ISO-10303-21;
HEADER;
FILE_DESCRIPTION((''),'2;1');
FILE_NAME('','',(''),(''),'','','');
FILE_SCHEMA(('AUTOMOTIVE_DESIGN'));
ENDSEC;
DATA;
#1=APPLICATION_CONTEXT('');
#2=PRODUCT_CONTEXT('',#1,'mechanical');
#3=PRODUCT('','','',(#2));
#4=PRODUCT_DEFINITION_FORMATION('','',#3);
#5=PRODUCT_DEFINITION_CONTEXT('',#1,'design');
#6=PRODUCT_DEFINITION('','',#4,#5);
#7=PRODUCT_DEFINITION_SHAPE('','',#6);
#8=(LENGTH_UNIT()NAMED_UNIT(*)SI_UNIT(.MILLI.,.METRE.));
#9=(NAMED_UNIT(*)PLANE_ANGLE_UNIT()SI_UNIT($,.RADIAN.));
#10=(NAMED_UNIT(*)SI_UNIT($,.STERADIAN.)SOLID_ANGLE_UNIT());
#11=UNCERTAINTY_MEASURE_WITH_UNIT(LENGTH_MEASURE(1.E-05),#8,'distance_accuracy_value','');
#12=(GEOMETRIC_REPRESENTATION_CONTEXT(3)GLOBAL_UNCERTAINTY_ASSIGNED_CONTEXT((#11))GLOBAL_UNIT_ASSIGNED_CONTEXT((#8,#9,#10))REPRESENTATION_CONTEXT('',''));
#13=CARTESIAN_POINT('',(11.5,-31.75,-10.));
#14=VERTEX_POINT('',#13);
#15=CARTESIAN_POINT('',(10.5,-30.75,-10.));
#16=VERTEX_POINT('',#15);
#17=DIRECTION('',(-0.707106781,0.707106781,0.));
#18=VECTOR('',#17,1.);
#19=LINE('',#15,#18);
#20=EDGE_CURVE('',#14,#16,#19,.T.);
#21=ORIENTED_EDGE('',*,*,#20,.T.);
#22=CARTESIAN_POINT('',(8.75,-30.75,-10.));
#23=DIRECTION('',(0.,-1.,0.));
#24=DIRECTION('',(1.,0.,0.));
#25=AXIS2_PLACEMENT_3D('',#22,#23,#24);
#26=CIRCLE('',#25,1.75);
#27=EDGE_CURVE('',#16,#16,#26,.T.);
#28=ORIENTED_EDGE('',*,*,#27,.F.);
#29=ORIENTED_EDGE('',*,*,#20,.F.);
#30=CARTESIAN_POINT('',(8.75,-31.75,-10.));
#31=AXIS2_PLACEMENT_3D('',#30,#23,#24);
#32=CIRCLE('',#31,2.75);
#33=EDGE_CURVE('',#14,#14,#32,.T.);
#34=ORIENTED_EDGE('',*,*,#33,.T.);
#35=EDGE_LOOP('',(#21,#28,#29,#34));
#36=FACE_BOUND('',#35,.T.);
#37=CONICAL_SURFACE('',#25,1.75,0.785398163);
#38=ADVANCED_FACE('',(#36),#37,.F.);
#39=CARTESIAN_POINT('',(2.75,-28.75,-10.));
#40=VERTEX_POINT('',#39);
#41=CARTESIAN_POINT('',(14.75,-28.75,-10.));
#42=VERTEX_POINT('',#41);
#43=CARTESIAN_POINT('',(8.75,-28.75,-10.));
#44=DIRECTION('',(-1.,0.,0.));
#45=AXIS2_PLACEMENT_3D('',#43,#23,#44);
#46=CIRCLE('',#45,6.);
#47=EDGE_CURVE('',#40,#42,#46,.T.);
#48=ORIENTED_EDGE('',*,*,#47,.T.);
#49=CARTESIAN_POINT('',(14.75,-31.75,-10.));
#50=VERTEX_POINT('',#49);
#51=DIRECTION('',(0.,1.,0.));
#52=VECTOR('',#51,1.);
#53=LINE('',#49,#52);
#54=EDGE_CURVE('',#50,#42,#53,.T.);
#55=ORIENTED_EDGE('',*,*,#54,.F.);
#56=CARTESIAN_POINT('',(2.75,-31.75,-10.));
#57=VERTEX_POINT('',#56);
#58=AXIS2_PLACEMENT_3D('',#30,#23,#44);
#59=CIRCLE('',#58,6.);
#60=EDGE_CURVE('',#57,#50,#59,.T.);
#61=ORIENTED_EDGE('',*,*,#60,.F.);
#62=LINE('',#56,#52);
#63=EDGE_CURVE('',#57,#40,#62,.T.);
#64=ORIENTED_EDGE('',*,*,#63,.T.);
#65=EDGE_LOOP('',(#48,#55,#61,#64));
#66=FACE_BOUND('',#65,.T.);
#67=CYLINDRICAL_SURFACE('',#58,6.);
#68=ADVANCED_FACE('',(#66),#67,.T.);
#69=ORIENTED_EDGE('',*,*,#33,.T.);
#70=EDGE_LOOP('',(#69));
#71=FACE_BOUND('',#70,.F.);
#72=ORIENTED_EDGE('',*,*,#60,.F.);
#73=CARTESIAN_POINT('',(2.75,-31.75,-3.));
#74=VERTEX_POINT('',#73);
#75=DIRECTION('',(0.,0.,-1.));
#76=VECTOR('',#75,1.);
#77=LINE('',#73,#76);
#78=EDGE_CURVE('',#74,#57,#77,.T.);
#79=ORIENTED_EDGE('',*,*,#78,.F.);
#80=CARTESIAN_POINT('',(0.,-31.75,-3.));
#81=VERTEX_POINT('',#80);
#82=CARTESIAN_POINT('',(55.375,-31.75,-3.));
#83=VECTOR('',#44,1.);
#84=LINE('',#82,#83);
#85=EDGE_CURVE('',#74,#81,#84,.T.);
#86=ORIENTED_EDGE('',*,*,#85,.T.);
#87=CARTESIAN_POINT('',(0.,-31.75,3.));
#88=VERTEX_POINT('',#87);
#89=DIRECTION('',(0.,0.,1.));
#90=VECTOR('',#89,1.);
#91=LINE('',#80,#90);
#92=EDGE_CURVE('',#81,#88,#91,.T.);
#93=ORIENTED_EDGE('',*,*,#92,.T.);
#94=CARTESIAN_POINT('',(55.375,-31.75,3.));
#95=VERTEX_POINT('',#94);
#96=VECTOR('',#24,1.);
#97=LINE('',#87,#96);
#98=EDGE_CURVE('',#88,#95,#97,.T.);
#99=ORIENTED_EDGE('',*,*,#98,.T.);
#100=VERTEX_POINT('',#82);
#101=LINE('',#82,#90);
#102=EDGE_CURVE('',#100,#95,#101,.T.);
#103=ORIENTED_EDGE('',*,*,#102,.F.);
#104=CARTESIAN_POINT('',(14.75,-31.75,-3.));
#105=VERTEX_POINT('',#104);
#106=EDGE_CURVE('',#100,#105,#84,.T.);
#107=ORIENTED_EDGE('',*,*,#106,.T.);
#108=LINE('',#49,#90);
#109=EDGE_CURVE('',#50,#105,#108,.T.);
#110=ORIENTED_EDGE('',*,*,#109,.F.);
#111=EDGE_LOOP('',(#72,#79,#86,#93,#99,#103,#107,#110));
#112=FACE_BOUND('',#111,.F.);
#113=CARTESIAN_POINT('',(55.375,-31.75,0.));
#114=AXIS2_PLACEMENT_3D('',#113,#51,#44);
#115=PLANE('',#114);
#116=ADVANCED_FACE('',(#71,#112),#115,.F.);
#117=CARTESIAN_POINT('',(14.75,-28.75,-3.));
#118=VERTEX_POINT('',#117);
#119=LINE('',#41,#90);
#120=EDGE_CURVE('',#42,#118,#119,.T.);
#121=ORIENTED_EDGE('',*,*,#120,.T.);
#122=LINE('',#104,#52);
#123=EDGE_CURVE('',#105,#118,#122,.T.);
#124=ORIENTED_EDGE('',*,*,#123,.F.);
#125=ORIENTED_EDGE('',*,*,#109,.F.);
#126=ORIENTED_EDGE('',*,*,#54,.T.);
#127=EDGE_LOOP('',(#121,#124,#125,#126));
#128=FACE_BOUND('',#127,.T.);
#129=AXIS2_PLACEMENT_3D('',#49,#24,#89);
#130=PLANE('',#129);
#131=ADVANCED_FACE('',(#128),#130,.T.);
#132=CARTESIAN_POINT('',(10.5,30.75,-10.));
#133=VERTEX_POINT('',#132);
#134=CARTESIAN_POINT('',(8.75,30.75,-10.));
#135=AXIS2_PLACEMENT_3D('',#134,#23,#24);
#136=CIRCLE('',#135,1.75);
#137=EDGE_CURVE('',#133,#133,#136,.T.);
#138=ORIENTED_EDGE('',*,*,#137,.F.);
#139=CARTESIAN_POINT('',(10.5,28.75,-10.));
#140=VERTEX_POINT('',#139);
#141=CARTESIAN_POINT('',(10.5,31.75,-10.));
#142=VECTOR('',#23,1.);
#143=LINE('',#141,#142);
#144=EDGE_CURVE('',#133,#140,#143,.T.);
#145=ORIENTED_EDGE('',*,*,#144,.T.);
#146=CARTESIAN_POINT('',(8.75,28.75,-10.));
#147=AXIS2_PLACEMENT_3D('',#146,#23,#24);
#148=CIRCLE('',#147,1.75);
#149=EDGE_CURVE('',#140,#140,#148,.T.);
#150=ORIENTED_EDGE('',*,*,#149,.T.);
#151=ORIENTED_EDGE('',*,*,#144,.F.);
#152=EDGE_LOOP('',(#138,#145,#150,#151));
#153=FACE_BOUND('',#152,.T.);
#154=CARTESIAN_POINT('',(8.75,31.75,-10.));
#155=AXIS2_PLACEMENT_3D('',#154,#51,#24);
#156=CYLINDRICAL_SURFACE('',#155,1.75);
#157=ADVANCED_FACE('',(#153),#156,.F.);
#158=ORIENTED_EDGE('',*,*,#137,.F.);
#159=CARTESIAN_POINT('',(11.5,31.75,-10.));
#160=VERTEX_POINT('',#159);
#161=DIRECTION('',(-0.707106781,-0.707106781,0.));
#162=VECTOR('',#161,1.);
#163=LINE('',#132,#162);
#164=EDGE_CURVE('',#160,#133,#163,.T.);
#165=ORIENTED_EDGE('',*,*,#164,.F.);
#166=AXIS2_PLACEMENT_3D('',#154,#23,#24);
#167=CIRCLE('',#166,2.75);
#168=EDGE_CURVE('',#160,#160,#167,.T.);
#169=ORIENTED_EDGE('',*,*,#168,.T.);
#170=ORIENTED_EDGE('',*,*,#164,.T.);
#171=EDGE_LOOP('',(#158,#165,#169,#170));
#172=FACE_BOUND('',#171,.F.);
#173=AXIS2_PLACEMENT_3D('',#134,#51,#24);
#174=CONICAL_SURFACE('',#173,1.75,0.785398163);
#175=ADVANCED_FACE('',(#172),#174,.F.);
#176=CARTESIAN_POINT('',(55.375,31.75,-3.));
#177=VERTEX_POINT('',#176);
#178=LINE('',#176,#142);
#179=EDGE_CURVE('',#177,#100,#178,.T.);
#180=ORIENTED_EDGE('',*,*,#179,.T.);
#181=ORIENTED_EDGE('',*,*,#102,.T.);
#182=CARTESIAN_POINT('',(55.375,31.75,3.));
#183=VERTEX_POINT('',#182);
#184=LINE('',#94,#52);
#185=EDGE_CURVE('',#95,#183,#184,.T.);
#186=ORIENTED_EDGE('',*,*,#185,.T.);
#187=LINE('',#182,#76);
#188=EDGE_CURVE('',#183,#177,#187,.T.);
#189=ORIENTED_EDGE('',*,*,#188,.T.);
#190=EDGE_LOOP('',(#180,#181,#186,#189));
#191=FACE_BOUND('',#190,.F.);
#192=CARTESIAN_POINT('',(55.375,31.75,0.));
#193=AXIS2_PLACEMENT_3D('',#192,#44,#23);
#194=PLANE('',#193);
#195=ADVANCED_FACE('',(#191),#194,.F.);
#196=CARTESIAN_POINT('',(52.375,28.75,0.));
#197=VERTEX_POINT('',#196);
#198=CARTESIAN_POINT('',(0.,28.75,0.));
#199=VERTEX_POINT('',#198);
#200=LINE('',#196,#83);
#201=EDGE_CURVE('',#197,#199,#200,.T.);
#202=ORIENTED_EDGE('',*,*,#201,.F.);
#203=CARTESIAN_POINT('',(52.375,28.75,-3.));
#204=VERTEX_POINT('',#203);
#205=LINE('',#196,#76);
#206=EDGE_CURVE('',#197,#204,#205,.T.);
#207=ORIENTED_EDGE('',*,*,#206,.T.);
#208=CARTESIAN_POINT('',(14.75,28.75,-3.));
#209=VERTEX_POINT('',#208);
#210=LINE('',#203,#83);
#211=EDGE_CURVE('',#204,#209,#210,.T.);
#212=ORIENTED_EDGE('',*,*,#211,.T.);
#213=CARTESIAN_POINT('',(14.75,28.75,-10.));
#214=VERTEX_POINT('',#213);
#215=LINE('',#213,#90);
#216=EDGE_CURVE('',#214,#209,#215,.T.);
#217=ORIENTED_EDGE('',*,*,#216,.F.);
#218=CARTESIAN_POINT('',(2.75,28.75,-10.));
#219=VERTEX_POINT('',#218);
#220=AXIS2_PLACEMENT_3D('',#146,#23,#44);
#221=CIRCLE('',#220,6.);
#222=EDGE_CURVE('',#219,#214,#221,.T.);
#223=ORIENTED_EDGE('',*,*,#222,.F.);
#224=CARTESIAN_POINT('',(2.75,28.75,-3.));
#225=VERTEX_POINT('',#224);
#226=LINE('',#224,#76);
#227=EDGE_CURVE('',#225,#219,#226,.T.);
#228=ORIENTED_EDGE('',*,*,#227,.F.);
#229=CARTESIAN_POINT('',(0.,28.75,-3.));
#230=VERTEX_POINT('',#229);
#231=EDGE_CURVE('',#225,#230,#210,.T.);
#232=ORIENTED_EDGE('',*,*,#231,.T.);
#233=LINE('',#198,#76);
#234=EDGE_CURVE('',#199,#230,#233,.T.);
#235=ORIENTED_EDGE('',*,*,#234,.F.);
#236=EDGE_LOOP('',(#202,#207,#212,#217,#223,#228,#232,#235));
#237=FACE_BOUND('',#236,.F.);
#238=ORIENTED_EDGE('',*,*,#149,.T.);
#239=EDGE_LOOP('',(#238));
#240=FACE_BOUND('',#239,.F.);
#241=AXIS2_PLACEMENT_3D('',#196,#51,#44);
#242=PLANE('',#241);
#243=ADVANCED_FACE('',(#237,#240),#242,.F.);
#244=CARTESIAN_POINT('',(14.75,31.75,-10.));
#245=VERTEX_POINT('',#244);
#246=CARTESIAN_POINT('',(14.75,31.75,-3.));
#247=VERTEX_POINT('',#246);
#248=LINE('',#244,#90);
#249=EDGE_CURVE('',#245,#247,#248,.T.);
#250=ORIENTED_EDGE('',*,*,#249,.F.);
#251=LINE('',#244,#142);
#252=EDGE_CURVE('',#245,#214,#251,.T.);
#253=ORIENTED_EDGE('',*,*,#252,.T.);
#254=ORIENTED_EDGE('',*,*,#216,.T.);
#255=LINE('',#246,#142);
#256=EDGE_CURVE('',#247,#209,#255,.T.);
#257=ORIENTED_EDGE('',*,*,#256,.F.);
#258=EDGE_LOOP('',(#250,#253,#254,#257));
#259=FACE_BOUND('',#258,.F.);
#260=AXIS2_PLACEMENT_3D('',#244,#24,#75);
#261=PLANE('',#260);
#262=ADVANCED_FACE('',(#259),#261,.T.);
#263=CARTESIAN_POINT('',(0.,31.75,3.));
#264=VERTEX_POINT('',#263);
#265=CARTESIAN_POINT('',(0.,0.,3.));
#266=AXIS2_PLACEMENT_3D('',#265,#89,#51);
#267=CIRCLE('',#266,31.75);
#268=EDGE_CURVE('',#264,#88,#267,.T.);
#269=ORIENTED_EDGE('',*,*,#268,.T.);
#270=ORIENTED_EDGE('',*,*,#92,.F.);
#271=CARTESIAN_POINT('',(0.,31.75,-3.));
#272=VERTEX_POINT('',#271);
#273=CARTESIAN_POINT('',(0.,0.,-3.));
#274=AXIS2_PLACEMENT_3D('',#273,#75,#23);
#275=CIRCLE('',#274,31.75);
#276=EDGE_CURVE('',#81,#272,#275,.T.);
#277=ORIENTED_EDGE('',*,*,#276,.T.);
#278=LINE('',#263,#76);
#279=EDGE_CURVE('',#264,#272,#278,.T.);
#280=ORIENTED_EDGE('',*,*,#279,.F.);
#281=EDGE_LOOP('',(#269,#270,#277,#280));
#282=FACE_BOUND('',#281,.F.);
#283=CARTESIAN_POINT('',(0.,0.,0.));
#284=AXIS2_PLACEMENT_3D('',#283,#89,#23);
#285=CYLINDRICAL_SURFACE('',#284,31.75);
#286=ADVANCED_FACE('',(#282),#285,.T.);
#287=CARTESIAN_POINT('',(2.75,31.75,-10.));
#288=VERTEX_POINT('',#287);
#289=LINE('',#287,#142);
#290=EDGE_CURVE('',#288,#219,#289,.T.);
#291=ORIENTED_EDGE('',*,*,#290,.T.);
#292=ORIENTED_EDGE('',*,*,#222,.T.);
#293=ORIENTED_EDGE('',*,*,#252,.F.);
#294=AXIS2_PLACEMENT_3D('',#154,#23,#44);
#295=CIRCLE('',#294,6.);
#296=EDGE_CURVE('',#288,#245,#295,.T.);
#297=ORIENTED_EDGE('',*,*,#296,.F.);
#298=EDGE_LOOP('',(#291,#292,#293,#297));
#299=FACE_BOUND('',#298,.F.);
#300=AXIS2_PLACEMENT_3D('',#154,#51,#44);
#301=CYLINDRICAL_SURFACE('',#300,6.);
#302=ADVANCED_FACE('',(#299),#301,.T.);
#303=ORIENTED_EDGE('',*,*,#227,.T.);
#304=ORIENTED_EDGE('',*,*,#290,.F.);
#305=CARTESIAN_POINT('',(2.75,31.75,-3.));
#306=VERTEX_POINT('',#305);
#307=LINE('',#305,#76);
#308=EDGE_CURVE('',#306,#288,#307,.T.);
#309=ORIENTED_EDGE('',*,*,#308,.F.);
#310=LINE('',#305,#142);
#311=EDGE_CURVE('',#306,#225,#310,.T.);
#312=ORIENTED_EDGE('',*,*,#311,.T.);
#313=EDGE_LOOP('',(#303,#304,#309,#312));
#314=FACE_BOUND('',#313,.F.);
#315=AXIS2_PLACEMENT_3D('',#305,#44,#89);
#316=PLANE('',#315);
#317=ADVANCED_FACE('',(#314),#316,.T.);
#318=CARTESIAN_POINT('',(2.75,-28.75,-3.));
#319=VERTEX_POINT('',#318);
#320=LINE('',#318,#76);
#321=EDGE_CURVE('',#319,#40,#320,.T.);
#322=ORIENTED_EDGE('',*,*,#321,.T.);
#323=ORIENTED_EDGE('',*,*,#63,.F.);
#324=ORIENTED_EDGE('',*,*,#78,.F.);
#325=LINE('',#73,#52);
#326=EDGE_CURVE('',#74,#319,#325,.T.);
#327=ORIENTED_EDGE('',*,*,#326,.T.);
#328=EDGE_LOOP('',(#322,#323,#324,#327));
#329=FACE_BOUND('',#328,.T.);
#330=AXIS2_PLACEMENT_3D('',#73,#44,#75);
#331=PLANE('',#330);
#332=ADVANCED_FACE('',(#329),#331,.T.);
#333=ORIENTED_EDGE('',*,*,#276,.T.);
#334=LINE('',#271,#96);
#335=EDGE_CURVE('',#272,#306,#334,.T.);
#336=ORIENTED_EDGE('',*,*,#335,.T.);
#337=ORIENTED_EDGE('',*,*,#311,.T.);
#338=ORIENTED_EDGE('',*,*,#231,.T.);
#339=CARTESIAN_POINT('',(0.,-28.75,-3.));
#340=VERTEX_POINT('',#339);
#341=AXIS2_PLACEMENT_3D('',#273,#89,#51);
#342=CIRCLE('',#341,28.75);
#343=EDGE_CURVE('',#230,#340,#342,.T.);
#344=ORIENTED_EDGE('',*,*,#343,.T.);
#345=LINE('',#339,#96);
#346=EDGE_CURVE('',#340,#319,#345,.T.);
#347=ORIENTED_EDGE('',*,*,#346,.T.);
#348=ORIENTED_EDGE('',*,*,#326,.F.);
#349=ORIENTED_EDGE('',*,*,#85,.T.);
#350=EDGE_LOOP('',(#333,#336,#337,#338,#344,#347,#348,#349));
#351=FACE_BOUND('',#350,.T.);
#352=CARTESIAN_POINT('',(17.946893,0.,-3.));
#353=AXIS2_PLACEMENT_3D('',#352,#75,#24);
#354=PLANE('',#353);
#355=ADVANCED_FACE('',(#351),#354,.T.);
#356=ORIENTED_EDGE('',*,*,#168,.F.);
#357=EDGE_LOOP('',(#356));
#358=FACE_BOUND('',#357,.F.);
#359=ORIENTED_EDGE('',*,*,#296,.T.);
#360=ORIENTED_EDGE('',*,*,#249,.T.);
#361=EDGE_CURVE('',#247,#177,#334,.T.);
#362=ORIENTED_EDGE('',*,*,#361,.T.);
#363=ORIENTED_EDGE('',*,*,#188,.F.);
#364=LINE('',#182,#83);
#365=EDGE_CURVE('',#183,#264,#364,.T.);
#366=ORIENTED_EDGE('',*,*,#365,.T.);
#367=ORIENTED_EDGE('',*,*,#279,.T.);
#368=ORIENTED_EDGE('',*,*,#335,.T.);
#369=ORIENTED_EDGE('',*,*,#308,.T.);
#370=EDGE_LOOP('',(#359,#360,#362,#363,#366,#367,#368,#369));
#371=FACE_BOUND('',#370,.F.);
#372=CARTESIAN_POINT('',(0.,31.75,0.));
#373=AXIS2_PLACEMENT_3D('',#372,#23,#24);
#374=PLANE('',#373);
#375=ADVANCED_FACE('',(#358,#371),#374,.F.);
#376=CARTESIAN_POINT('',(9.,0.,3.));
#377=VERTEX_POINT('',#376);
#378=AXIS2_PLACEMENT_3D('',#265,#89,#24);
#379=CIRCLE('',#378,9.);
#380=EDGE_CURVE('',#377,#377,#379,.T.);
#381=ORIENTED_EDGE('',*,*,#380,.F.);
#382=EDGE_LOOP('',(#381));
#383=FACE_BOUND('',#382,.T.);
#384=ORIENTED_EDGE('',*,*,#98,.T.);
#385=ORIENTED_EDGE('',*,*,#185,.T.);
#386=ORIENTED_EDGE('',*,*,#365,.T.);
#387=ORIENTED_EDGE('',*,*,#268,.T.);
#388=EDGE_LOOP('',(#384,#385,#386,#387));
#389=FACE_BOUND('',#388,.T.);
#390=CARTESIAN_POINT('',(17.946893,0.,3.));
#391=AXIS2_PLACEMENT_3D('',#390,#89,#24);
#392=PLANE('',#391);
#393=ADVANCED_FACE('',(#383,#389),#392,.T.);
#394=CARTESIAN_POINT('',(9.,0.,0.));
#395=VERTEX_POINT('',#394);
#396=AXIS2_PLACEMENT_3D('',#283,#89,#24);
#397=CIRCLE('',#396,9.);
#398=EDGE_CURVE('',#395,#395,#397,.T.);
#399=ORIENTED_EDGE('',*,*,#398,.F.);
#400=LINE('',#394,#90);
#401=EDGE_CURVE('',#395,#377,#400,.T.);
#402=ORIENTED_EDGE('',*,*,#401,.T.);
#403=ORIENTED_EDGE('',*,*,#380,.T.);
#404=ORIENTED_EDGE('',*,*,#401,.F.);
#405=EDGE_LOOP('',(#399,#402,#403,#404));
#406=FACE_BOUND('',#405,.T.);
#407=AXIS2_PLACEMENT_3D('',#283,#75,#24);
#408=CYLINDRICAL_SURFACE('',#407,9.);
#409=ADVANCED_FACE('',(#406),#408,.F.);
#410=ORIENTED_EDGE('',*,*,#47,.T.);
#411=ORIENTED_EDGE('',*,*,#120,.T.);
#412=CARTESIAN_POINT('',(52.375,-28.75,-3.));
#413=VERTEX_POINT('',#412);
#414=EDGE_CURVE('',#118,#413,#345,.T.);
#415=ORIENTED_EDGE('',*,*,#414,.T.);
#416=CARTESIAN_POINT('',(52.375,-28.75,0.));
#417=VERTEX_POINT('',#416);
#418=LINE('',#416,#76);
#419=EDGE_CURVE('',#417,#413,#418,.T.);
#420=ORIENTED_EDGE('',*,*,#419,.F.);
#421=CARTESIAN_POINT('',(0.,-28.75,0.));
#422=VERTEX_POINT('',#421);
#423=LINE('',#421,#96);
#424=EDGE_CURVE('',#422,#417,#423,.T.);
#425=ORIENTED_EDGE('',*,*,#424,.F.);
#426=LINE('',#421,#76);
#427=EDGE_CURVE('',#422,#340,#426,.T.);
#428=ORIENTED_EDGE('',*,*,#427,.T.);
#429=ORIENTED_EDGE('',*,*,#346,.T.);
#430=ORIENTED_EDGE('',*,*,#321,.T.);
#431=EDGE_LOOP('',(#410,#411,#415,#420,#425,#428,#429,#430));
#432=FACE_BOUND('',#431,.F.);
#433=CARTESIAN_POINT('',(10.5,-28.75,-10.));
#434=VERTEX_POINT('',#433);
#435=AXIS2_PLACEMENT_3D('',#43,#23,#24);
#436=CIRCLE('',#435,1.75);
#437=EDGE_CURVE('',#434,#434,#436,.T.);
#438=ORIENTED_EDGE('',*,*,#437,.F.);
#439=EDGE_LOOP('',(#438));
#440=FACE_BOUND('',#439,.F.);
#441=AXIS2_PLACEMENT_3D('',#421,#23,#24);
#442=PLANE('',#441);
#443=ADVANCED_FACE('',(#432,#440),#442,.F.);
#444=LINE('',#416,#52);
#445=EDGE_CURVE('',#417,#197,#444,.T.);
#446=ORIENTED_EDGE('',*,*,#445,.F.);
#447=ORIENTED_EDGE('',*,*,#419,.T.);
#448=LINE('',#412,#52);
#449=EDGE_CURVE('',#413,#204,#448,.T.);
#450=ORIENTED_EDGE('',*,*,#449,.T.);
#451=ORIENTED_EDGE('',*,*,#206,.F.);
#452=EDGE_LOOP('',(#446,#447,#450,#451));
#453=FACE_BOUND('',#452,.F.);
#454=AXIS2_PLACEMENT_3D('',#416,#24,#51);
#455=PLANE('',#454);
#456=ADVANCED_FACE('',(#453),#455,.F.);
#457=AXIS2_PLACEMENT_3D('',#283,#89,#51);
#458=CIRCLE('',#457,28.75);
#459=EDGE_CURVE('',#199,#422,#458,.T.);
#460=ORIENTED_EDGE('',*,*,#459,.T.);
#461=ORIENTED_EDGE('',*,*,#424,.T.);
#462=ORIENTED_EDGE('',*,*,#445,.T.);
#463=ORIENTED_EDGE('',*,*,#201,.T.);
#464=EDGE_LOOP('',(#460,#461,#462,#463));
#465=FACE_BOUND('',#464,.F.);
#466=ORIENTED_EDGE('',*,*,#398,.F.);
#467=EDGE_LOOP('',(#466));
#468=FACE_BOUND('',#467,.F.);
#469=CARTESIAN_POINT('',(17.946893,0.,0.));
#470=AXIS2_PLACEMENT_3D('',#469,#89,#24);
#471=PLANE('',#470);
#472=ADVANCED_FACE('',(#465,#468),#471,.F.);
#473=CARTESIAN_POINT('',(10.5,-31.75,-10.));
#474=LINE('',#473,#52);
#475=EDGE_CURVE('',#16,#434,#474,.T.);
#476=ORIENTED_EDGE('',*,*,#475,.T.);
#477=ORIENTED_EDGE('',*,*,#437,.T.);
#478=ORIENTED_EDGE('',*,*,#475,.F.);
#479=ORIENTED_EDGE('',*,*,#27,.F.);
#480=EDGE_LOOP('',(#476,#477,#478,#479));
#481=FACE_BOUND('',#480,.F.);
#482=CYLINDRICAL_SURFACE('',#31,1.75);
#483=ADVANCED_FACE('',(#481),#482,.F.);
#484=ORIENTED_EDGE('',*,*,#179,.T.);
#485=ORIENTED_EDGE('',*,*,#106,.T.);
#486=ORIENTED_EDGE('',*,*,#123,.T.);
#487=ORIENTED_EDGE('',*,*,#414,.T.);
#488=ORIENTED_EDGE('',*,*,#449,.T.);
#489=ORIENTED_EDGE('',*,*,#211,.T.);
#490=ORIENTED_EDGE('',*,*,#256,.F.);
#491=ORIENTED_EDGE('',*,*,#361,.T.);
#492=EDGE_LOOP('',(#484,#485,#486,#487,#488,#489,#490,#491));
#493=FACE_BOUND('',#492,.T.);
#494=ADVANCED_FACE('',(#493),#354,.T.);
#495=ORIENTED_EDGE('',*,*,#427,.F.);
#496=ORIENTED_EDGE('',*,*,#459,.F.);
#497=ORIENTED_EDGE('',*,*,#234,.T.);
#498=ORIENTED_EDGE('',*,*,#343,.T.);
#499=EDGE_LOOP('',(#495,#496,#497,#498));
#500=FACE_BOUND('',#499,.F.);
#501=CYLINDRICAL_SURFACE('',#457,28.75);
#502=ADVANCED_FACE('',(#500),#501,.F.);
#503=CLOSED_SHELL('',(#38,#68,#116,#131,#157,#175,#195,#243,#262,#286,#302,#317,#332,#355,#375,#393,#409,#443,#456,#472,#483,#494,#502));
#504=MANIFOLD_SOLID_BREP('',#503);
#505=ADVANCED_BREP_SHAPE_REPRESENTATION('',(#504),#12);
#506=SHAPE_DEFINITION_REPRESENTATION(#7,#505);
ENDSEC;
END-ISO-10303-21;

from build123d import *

# Parameters (mm, degrees)
F0_R     = 9
F1_DEPTH = 3
F3_DEPTH = 3
F4_R     = 1.75
F5_DEPTH = 3
F7_SIZE  = 1


# Not quite as in the source:
# - a feature names something its author has since deleted; it is built from what else it names


with BuildPart() as f1:
    # F0 (on Top) → F1 (new body)
    with BuildSketch(Plane.XY):
        with BuildLine():
            Line((55.375, -31.75), (55.375, 31.75))
            Line((55.375, 31.75), (0, 31.75))
            ThreePointArc((0, 31.75), (-31.75, 0), (0, -31.75))
            Line((0, -31.75), (55.375, -31.75))
        make_face()
        Circle(F0_R, mode=Mode.SUBTRACT)
    extrude(amount=F1_DEPTH)

    # F2 (on face) → F3 (join)
    with BuildSketch(Plane(origin=(0, 0, 0), x_dir=(1, 0, 0), z_dir=(0, 0, -1))):
        with BuildLine():
            ThreePointArc((0, 31.75), (-31.75, 0), (0, -31.75))
            Line((0, -31.75), (55.375, -31.75))
            Line((55.375, -31.75), (55.375, 31.75))
            Line((55.375, 31.75), (0, 31.75))
        make_face()
        with BuildLine():
            Line((52.375, -28.75), (0, -28.75))
            ThreePointArc((0, -28.75), (-28.75, 0), (0, 28.75))
            Line((0, 28.75), (52.375, 28.75))
            Line((52.375, 28.75), (52.375, -28.75))
        make_face(mode=Mode.SUBTRACT)
    extrude(amount=F3_DEPTH)

    # F4 (on face) → F5 (join)
    with BuildSketch(Plane.XZ.offset(31.75)):
        with BuildLine():
            Line((14.75, -3), (2.75, -3))
            Line((2.75, -3), (2.75, -10))
            ThreePointArc((2.75, -10), (8.75, -16), (14.75, -10))
            Line((14.75, -10), (14.75, -3))
        make_face()
        with Locations((8.75, -10)):
            Circle(F4_R, mode=Mode.SUBTRACT)
    extrude(amount=-F5_DEPTH)

    # F6: F1 across plane


with BuildPart() as f1_1:
    add(f1.part)
    add(f1.part.mirror(Plane.XZ))

    # F7
    f7_edges = [f1_1.edges().sort_by_distance(p)[0] for p in [
        (7, -31.75, -10),
        (7, 31.75, -10),
    ]]
    chamfer(f7_edges, length=F7_SIZE)


solid = f1_1.part
